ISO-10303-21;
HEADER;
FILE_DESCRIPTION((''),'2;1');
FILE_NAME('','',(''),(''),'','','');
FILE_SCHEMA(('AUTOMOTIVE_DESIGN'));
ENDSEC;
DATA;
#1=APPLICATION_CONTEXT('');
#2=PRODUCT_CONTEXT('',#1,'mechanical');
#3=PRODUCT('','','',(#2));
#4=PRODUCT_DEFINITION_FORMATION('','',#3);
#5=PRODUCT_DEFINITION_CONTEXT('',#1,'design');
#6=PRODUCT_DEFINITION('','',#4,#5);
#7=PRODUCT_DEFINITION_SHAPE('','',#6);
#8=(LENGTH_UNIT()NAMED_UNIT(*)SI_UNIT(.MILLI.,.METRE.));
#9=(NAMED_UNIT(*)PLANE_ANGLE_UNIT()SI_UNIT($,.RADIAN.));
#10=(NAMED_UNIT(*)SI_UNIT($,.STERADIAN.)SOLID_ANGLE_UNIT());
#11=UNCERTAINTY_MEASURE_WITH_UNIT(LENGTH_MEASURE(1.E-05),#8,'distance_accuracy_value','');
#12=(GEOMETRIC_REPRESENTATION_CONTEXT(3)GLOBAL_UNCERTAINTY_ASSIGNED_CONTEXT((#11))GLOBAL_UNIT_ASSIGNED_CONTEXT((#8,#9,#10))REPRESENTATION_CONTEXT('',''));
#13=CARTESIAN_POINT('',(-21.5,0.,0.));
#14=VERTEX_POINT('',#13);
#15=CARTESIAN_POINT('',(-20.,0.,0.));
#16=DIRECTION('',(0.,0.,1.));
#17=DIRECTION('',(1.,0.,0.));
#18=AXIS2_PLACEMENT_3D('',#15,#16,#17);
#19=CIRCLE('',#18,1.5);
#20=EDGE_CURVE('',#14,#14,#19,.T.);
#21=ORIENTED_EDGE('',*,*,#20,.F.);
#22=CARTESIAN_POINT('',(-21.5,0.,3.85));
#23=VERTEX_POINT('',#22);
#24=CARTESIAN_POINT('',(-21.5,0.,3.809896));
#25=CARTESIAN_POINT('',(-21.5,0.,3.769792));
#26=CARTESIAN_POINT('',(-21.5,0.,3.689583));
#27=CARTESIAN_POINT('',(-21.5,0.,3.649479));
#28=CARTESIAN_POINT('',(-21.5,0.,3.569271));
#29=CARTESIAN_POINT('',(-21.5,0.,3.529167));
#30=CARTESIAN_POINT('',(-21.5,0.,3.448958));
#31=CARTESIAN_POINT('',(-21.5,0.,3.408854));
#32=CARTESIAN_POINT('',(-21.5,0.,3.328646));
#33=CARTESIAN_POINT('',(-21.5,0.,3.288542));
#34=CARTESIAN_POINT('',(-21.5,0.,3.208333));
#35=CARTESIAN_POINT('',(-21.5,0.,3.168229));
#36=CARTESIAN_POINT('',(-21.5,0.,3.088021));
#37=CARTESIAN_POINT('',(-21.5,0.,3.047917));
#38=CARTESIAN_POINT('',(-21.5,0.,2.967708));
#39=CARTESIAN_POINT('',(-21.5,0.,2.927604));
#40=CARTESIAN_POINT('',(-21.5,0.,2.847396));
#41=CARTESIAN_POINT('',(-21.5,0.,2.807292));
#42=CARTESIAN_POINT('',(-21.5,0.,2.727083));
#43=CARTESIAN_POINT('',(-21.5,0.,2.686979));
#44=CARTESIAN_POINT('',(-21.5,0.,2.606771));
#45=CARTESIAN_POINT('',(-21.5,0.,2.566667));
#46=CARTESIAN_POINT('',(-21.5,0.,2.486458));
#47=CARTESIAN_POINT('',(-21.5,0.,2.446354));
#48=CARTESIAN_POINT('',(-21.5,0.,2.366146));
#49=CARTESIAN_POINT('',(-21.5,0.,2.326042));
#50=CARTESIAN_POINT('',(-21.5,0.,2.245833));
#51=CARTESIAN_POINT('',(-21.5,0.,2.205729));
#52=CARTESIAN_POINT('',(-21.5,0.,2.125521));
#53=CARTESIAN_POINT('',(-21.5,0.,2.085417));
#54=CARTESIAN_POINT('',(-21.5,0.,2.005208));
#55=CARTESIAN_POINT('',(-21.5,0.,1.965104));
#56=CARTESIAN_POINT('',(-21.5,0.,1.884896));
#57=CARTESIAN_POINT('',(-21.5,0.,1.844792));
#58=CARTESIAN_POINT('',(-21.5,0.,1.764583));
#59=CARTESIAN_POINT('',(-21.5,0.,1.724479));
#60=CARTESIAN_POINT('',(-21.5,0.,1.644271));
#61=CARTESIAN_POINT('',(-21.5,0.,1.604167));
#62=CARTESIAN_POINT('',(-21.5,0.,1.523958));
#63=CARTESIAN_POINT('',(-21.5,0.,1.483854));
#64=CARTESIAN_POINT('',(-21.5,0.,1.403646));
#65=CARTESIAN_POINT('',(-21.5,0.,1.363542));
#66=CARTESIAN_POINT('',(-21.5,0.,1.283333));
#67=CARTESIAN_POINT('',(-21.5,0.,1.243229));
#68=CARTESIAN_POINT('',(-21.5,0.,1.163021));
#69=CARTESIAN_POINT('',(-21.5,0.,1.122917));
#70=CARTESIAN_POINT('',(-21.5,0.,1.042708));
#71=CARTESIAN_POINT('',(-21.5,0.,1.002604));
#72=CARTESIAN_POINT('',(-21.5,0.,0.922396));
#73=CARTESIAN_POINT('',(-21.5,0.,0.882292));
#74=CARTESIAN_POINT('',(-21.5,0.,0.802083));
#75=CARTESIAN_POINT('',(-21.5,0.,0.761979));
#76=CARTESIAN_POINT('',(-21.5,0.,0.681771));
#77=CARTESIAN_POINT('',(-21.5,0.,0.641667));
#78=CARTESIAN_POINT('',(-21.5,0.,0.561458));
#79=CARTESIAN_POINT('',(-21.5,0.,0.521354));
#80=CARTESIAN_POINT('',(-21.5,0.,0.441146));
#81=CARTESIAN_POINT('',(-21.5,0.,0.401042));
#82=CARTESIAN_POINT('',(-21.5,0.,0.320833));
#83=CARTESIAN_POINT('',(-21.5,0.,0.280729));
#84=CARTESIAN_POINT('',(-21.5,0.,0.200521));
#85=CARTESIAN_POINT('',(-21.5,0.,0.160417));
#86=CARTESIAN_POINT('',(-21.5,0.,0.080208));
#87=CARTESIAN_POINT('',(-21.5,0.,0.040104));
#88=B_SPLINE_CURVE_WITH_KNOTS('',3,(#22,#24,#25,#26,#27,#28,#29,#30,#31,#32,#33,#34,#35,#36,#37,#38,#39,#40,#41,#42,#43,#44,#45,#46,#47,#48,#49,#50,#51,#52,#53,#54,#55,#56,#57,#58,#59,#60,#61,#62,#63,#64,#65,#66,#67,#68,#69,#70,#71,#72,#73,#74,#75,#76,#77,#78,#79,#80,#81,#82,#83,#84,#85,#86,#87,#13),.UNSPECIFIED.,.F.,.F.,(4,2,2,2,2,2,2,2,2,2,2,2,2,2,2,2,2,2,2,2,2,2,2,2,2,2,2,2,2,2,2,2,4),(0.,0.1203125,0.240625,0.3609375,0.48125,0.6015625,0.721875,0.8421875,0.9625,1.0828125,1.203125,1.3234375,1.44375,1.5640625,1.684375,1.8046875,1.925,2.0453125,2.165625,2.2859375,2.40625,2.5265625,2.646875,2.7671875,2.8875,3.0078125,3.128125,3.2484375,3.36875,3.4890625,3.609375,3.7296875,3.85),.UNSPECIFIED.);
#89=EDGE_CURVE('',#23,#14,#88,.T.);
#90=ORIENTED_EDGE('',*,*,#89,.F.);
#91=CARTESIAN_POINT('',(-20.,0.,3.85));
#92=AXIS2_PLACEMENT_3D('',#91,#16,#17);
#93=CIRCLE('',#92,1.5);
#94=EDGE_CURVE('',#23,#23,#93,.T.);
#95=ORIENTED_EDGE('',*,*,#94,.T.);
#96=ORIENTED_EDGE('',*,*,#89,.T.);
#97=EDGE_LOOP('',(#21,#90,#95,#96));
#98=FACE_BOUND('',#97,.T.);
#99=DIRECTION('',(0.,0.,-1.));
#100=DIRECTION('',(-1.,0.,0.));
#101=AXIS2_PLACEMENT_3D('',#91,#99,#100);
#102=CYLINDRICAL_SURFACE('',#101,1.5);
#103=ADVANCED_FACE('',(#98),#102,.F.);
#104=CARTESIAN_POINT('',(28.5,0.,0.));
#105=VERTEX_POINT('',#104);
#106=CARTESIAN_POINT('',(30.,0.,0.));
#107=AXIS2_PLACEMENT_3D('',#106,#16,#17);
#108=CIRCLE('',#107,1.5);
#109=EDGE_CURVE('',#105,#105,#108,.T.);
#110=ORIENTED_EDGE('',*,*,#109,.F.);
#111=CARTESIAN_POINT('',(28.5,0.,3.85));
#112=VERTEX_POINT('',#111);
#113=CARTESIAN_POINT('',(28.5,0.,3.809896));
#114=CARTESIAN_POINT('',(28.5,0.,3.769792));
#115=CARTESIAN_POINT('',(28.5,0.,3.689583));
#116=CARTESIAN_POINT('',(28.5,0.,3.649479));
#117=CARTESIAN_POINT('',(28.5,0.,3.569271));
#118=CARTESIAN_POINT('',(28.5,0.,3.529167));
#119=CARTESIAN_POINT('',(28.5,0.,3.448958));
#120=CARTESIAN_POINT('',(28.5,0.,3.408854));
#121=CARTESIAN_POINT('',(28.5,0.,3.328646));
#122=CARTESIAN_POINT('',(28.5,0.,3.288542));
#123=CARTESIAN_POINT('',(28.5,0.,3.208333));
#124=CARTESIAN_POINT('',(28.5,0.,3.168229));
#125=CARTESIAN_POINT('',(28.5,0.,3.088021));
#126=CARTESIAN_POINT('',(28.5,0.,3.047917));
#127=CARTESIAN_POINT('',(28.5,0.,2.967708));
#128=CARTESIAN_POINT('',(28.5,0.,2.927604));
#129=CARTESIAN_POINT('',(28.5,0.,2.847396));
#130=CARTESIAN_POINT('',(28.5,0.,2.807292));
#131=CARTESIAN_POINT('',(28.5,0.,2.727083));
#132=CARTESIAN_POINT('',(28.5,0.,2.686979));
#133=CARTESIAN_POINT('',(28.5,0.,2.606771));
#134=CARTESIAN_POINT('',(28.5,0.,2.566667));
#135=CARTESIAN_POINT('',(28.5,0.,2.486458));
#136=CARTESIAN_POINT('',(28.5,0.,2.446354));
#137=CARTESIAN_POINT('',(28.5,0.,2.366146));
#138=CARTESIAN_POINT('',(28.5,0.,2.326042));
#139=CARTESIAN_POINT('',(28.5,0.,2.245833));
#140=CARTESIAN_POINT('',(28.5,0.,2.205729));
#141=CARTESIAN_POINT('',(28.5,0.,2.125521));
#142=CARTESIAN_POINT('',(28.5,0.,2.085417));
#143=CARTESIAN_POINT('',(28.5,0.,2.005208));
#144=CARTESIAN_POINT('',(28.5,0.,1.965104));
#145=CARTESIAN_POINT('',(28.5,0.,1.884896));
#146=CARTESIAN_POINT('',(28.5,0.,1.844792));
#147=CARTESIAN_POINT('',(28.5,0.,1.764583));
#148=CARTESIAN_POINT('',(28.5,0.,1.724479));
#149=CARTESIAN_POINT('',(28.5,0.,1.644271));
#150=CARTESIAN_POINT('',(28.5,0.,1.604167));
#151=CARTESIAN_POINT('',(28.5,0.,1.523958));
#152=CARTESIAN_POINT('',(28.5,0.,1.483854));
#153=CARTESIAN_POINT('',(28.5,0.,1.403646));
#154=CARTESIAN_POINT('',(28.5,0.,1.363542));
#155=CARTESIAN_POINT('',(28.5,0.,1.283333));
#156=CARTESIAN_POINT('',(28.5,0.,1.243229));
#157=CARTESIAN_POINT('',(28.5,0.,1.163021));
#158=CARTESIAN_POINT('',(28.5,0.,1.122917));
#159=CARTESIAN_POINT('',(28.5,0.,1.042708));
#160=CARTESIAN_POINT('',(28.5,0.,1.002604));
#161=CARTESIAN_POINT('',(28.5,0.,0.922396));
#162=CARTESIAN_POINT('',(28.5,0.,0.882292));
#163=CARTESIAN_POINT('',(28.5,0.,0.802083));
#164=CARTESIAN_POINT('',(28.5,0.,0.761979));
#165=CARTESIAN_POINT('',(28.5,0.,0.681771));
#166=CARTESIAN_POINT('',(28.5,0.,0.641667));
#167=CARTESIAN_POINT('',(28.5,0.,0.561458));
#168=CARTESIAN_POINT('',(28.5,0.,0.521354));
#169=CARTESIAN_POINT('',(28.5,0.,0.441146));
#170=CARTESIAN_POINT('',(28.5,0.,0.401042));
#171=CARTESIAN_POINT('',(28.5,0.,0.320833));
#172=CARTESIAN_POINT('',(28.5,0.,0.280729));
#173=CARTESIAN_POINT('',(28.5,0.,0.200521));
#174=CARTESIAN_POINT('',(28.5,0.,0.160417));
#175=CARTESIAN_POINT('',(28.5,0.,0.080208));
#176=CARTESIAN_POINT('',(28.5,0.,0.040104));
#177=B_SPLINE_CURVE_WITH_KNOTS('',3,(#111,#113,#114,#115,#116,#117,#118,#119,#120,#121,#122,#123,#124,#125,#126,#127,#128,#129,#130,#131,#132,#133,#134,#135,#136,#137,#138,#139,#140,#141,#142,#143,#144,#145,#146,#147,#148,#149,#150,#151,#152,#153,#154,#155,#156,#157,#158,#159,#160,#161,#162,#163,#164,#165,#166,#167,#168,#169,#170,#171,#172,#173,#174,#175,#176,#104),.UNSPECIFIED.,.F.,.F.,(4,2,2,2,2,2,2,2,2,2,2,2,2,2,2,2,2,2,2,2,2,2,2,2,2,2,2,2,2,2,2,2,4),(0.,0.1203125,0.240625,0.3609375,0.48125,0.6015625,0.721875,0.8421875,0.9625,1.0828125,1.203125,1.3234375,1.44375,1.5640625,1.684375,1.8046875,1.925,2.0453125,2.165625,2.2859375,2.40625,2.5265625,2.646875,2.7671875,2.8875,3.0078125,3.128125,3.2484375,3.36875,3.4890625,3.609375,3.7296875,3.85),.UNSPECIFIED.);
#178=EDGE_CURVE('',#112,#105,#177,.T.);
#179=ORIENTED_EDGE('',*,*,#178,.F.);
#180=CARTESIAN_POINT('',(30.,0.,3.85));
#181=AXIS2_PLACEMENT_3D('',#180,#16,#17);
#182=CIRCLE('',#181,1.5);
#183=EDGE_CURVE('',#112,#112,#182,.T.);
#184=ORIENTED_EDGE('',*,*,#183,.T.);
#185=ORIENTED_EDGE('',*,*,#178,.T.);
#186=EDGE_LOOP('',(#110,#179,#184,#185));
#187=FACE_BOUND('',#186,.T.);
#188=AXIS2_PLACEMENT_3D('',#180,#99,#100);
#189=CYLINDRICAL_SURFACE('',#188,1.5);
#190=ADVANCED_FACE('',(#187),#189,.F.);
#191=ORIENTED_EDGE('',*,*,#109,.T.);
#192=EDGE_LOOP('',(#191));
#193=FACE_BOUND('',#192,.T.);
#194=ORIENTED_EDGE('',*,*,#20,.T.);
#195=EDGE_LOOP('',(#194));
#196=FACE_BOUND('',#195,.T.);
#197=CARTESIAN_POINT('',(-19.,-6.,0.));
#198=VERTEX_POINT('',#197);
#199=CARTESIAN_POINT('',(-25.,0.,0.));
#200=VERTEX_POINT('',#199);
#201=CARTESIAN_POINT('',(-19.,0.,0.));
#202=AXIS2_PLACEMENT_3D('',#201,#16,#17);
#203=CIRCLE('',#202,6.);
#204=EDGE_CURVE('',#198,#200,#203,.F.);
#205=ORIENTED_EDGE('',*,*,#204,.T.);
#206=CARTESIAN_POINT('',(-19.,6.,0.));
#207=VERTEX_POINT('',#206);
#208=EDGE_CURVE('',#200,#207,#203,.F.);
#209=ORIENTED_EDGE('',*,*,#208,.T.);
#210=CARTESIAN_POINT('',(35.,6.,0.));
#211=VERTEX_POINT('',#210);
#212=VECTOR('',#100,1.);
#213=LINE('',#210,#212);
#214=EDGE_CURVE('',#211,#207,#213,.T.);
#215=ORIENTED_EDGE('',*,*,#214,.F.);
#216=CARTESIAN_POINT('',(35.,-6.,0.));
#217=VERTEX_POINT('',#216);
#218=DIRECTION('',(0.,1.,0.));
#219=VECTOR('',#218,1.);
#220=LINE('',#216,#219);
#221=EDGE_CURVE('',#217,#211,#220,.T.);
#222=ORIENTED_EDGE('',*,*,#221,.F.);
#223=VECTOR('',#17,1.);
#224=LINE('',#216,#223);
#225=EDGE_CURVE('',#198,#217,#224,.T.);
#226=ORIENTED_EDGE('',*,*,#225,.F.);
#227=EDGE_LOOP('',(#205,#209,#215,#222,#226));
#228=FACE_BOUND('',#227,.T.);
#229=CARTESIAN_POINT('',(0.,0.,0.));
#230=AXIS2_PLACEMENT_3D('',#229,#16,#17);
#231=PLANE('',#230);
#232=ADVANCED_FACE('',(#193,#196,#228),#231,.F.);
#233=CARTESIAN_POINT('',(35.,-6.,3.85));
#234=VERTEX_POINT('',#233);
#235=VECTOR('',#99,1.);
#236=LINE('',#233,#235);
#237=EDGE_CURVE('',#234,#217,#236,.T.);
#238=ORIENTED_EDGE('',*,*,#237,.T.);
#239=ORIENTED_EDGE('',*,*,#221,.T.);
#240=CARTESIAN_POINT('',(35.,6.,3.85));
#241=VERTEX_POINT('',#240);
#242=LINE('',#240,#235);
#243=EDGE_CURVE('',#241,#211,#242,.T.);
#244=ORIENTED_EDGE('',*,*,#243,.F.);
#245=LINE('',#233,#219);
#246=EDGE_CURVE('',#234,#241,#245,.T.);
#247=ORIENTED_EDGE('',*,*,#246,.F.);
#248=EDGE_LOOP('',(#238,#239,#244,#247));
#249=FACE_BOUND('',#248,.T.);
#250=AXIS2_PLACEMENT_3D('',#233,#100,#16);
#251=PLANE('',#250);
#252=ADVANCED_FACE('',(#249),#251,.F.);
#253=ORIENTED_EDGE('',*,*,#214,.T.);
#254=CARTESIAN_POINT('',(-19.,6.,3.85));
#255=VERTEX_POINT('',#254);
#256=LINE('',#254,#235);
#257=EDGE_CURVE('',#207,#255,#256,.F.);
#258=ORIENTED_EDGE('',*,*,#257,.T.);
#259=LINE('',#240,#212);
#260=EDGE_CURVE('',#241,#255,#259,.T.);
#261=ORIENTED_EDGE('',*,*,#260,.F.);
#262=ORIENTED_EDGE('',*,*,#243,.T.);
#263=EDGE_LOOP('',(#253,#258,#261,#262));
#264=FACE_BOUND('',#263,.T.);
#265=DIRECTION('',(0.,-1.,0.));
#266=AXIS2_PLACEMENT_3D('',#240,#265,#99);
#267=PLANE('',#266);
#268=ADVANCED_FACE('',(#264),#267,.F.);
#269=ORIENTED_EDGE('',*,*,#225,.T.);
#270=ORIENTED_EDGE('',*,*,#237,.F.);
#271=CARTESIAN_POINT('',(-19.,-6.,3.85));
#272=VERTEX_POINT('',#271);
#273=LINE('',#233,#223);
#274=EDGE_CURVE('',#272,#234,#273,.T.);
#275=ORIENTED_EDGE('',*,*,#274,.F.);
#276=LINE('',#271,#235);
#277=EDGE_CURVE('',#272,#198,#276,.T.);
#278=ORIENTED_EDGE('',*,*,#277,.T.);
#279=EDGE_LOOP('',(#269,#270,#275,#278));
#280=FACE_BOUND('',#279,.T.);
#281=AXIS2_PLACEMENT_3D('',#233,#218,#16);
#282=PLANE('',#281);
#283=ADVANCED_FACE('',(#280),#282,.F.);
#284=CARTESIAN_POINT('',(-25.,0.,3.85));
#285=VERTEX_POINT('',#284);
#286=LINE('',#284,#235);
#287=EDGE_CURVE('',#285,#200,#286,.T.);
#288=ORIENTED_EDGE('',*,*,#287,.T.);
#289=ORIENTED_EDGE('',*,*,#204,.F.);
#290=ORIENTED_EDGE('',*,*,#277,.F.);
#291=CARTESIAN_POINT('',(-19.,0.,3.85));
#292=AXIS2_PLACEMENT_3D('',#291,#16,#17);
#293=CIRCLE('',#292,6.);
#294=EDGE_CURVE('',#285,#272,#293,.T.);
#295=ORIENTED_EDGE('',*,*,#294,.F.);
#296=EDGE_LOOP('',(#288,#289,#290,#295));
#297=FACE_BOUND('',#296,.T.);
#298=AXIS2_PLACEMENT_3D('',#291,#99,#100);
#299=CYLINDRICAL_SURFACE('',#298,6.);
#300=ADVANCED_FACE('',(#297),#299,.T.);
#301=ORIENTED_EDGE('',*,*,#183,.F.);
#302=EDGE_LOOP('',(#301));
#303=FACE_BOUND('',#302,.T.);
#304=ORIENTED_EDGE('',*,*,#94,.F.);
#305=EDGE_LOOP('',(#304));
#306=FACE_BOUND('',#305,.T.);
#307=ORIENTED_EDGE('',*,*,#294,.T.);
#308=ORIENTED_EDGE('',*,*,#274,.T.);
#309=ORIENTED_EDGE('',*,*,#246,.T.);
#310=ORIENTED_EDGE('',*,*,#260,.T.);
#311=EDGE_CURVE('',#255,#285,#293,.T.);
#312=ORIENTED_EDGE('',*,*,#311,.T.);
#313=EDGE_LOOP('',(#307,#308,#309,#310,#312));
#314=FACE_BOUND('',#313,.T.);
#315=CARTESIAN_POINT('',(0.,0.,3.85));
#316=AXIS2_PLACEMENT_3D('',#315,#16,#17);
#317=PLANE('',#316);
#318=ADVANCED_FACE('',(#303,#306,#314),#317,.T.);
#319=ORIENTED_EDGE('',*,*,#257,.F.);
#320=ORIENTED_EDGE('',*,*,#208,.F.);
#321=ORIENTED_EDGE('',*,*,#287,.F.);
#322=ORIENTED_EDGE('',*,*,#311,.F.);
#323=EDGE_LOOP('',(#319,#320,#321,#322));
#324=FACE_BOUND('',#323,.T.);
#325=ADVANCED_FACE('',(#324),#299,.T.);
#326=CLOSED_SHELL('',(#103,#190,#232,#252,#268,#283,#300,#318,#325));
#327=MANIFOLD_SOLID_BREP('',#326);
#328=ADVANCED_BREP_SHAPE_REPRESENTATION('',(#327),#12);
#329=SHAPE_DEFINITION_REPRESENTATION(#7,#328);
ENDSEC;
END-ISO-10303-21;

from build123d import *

# Parameters (mm, degrees)
SKETCH_1_W      = 60
SKETCH_1_H      = 12
SKETCH_1_R      = 1.5
EXTRUDE_1_DEPTH = 3.85
FILLET_1_R      = 6


with BuildPart() as part:
    # 草图1 → 凸台-拉伸1 (new body)
    with BuildSketch(Plane.XY):
        with Locations((5, 0)):
            Rectangle(SKETCH_1_W, SKETCH_1_H)
        with Locations(Location((-20, 0, 0), (0, 0, 180))):
            Circle(SKETCH_1_R, mode=Mode.SUBTRACT)
        with Locations(Location((30, 0, 0), (0, 0, 180))):
            Circle(SKETCH_1_R, mode=Mode.SUBTRACT)
    extrude(amount=EXTRUDE_1_DEPTH)

    # 圆角1
    fillet_1_edges = [part.edges().sort_by_distance(p)[0] for p in [
        (-25, -6, 1.925),
        (-25, 6, 1.925),
    ]]
    fillet(fillet_1_edges, radius=FILLET_1_R - 0.0001)  # a hair under: the kernel refuses the full size


solid = part.part
